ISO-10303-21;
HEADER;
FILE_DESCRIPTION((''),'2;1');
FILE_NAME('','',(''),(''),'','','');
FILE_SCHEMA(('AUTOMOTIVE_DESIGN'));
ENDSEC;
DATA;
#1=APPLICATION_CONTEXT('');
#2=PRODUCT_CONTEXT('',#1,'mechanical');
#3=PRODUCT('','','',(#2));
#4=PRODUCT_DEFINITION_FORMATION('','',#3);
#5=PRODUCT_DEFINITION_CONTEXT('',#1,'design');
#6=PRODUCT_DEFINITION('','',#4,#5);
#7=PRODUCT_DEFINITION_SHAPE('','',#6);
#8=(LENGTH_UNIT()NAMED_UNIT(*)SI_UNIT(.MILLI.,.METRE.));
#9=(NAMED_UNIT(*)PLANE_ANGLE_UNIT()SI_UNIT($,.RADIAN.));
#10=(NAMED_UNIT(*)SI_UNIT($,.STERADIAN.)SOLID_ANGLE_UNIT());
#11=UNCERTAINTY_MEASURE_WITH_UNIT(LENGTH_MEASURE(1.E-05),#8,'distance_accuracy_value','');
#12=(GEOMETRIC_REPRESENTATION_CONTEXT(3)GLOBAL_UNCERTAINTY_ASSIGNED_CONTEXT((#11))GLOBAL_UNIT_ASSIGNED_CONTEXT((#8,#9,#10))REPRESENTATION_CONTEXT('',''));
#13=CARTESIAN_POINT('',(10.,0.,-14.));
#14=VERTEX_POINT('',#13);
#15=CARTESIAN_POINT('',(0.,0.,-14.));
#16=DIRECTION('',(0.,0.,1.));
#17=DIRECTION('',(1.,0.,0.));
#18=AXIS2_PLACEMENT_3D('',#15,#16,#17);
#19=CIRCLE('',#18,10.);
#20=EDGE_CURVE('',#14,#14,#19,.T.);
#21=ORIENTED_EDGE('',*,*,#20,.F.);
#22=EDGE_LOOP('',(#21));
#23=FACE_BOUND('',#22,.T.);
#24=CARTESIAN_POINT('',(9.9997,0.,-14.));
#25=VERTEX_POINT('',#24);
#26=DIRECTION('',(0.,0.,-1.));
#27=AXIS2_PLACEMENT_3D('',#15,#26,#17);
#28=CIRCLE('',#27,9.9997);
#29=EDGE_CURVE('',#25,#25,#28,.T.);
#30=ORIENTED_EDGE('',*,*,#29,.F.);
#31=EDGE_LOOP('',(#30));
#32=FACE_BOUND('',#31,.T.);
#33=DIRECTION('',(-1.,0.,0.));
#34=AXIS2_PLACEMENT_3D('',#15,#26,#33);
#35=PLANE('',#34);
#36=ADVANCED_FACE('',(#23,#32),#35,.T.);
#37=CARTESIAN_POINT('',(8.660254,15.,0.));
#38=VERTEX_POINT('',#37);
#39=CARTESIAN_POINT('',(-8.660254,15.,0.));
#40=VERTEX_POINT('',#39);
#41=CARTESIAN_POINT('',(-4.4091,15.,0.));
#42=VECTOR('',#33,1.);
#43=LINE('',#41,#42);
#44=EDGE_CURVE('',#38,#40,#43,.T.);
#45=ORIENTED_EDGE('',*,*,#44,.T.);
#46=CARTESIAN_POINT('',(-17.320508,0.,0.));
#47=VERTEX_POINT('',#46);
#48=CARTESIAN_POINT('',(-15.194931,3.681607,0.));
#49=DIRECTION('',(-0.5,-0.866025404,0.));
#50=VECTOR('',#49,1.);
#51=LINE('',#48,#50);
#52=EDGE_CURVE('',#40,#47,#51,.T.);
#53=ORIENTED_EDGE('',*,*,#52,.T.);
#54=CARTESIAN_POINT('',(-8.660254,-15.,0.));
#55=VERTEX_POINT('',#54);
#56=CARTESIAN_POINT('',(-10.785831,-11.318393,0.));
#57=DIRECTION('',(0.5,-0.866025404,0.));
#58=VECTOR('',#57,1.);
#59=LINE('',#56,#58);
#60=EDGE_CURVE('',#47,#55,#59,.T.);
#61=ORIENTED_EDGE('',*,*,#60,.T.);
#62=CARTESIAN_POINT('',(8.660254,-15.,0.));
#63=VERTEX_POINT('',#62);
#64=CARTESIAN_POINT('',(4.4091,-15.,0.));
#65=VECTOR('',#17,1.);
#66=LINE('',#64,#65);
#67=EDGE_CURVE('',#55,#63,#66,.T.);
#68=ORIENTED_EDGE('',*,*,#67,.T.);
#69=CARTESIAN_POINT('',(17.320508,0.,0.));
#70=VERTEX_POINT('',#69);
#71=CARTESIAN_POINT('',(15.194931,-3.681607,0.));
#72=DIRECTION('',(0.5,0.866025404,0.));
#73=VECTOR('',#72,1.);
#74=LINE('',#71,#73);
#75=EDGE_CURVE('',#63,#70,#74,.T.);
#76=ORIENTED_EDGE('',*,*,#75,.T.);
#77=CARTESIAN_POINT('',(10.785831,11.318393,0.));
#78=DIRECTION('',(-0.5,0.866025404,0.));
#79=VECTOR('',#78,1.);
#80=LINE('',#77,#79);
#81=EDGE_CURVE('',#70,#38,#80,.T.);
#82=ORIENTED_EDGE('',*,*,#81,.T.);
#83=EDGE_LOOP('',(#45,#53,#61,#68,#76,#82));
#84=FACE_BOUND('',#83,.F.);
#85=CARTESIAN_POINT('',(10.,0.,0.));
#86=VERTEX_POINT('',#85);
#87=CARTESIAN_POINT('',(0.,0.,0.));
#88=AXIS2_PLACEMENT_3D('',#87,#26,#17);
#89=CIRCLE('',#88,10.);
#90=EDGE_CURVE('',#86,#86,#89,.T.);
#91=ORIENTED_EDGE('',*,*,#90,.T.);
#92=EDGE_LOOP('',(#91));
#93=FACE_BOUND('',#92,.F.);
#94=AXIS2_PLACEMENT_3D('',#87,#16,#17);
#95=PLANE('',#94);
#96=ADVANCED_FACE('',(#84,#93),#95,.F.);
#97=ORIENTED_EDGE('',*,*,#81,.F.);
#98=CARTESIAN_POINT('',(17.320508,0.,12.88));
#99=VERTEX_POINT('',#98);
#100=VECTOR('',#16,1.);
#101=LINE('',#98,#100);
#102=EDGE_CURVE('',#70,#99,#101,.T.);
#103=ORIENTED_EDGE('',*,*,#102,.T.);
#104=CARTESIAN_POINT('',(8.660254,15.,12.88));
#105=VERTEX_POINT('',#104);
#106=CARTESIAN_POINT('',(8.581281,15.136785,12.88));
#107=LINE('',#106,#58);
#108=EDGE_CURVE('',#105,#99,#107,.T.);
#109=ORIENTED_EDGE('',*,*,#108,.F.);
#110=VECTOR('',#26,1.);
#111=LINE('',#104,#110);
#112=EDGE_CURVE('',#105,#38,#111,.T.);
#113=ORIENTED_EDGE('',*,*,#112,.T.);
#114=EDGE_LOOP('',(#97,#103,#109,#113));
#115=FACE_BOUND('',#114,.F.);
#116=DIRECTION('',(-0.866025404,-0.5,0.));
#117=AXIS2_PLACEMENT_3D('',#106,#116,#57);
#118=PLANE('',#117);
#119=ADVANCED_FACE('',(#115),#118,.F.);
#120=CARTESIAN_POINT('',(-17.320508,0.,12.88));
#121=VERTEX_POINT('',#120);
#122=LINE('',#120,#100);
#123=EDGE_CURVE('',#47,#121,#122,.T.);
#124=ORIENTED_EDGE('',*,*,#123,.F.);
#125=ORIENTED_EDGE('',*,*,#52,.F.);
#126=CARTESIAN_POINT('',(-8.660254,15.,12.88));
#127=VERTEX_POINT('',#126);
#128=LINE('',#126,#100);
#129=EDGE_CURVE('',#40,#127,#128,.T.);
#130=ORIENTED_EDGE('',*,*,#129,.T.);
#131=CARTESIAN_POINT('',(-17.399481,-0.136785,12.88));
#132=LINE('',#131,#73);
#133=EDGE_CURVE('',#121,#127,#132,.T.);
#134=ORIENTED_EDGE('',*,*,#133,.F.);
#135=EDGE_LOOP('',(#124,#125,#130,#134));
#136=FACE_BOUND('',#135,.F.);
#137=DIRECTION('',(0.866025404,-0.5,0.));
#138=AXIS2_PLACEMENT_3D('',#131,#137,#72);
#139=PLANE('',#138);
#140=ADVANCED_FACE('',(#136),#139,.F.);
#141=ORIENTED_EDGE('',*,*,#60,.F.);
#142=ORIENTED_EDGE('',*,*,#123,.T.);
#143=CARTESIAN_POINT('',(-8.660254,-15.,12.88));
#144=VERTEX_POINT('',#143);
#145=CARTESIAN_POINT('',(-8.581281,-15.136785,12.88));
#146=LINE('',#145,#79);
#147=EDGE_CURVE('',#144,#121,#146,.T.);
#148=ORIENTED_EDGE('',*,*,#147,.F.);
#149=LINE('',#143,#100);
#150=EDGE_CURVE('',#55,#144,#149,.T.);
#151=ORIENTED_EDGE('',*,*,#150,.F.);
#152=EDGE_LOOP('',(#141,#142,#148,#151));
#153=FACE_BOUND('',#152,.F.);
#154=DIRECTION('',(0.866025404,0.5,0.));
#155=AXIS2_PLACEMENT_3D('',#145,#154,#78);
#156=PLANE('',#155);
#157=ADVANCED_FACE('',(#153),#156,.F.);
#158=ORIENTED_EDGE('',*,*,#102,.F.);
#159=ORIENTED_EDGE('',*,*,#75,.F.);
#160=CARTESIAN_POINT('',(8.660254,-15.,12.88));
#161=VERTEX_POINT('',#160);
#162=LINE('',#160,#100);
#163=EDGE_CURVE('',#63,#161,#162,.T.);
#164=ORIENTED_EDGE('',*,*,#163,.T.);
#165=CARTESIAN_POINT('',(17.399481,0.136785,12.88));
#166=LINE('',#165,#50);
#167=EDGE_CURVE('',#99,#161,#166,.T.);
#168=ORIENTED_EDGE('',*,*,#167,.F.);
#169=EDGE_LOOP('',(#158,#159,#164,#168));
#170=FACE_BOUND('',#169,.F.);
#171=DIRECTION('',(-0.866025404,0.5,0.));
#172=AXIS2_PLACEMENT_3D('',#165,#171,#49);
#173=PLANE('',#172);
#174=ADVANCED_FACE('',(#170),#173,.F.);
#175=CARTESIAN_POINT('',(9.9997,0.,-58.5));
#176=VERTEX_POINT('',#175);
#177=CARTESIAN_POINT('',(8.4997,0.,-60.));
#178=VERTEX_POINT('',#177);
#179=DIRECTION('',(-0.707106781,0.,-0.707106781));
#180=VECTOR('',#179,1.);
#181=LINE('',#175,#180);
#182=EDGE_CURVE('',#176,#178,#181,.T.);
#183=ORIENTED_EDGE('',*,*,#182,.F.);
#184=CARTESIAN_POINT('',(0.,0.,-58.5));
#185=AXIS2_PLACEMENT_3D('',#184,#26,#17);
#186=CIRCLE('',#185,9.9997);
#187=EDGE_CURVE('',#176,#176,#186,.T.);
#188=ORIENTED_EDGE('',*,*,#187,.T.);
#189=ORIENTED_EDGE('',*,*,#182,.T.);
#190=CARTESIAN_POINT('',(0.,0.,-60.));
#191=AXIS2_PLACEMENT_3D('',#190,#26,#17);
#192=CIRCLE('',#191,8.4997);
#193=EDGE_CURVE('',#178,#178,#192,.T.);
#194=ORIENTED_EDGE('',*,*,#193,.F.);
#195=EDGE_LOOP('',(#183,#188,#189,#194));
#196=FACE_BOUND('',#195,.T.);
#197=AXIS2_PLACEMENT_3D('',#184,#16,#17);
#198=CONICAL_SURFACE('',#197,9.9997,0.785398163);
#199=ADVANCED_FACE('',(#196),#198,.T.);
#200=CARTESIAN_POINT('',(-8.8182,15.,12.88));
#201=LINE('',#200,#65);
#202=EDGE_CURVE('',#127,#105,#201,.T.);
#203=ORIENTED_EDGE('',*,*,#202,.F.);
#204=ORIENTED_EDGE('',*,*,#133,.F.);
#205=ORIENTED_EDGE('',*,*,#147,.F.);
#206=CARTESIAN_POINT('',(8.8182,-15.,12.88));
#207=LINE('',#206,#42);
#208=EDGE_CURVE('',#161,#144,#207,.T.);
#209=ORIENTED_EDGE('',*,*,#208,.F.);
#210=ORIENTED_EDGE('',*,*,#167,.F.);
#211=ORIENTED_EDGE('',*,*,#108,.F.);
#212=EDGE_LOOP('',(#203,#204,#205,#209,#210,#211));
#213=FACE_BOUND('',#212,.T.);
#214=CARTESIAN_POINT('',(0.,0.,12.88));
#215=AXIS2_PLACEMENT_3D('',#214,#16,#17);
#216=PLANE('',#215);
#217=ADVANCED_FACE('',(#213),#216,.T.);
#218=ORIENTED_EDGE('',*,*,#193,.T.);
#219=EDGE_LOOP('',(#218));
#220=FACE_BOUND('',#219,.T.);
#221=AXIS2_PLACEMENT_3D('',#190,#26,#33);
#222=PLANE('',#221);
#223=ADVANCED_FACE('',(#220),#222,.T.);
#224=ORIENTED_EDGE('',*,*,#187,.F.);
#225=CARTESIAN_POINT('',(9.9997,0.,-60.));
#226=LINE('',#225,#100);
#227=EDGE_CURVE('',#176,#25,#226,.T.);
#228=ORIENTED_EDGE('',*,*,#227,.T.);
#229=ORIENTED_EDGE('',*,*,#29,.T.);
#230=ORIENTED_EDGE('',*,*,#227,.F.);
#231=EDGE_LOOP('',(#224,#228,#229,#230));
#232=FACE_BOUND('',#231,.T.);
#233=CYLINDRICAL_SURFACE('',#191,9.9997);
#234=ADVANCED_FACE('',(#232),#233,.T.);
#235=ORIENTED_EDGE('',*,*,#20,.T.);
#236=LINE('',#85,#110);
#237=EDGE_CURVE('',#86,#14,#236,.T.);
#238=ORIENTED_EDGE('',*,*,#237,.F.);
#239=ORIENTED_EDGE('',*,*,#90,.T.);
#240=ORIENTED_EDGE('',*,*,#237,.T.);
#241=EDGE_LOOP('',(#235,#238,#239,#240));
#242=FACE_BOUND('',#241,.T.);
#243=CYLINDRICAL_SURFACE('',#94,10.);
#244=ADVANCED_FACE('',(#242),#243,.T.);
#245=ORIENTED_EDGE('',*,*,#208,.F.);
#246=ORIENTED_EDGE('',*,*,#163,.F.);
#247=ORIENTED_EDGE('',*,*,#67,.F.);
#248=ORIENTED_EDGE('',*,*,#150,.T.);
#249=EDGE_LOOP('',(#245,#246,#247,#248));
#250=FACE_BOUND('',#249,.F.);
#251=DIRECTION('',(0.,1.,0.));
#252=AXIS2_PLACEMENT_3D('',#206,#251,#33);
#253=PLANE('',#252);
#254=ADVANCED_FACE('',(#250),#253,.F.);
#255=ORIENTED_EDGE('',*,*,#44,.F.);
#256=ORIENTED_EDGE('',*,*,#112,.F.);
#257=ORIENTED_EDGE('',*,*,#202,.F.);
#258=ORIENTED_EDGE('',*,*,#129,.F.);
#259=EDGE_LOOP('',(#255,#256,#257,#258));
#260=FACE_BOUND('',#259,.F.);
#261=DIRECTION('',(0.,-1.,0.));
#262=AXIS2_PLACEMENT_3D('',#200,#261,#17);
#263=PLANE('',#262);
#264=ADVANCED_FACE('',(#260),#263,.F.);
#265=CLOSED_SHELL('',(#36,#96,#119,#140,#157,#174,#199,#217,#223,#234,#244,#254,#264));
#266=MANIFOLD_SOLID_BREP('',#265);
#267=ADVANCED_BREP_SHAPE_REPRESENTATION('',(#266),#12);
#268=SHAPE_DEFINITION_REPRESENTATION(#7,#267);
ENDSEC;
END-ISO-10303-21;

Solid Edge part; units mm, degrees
sketch "Sketch1" plane through (0, 0, 0) normal (0, 0, 1) x (1, 0, 0)
  circle A0 centre (0, 0) radius 17.4
  dimension "D1" = 34.8
extrude "Protrusion1" add sketch "Sketch1" along normal blind 12.88
sketch "Sketch2" plane through (0, 0, 0) normal (0, 0, -1) x (1, 0, 0)
  circle A0 centre (0, 0) radius 10
extrude "Protrusion2" add sketch "Sketch2" along normal blind 60
sketch "Sketch3" plane through (0, 0, -60) normal (0, 0, -1) x (1, 0, 0)
  circle A0 centre (0, 0) radius 9.9997
extrude "Cutout1" cut sketch "Sketch3" against normal blind 46 flip side to cut
chamfer "Chamfer_1" distance 1.5 angle 45 1 edges at (-9.9997, 0, -60)
sketch "Sketch4" plane through (0, 0, 12.88) normal (0, 0, 1) x (1, 0, 0)
  line L0 (-8.8182, 15) -> (8.8182, 15)
  dimension "D1" = 30
extrude "Cutout2" cut sketch "Sketch4" against normal up to next material side at (0, 15.05, 12.88)
pattern_circular "Pattern1" count 6 over 360 about axis through (0, 0, 12.88) along (0, 0, 1) of "Cutout2"
properties part number "24106740"
